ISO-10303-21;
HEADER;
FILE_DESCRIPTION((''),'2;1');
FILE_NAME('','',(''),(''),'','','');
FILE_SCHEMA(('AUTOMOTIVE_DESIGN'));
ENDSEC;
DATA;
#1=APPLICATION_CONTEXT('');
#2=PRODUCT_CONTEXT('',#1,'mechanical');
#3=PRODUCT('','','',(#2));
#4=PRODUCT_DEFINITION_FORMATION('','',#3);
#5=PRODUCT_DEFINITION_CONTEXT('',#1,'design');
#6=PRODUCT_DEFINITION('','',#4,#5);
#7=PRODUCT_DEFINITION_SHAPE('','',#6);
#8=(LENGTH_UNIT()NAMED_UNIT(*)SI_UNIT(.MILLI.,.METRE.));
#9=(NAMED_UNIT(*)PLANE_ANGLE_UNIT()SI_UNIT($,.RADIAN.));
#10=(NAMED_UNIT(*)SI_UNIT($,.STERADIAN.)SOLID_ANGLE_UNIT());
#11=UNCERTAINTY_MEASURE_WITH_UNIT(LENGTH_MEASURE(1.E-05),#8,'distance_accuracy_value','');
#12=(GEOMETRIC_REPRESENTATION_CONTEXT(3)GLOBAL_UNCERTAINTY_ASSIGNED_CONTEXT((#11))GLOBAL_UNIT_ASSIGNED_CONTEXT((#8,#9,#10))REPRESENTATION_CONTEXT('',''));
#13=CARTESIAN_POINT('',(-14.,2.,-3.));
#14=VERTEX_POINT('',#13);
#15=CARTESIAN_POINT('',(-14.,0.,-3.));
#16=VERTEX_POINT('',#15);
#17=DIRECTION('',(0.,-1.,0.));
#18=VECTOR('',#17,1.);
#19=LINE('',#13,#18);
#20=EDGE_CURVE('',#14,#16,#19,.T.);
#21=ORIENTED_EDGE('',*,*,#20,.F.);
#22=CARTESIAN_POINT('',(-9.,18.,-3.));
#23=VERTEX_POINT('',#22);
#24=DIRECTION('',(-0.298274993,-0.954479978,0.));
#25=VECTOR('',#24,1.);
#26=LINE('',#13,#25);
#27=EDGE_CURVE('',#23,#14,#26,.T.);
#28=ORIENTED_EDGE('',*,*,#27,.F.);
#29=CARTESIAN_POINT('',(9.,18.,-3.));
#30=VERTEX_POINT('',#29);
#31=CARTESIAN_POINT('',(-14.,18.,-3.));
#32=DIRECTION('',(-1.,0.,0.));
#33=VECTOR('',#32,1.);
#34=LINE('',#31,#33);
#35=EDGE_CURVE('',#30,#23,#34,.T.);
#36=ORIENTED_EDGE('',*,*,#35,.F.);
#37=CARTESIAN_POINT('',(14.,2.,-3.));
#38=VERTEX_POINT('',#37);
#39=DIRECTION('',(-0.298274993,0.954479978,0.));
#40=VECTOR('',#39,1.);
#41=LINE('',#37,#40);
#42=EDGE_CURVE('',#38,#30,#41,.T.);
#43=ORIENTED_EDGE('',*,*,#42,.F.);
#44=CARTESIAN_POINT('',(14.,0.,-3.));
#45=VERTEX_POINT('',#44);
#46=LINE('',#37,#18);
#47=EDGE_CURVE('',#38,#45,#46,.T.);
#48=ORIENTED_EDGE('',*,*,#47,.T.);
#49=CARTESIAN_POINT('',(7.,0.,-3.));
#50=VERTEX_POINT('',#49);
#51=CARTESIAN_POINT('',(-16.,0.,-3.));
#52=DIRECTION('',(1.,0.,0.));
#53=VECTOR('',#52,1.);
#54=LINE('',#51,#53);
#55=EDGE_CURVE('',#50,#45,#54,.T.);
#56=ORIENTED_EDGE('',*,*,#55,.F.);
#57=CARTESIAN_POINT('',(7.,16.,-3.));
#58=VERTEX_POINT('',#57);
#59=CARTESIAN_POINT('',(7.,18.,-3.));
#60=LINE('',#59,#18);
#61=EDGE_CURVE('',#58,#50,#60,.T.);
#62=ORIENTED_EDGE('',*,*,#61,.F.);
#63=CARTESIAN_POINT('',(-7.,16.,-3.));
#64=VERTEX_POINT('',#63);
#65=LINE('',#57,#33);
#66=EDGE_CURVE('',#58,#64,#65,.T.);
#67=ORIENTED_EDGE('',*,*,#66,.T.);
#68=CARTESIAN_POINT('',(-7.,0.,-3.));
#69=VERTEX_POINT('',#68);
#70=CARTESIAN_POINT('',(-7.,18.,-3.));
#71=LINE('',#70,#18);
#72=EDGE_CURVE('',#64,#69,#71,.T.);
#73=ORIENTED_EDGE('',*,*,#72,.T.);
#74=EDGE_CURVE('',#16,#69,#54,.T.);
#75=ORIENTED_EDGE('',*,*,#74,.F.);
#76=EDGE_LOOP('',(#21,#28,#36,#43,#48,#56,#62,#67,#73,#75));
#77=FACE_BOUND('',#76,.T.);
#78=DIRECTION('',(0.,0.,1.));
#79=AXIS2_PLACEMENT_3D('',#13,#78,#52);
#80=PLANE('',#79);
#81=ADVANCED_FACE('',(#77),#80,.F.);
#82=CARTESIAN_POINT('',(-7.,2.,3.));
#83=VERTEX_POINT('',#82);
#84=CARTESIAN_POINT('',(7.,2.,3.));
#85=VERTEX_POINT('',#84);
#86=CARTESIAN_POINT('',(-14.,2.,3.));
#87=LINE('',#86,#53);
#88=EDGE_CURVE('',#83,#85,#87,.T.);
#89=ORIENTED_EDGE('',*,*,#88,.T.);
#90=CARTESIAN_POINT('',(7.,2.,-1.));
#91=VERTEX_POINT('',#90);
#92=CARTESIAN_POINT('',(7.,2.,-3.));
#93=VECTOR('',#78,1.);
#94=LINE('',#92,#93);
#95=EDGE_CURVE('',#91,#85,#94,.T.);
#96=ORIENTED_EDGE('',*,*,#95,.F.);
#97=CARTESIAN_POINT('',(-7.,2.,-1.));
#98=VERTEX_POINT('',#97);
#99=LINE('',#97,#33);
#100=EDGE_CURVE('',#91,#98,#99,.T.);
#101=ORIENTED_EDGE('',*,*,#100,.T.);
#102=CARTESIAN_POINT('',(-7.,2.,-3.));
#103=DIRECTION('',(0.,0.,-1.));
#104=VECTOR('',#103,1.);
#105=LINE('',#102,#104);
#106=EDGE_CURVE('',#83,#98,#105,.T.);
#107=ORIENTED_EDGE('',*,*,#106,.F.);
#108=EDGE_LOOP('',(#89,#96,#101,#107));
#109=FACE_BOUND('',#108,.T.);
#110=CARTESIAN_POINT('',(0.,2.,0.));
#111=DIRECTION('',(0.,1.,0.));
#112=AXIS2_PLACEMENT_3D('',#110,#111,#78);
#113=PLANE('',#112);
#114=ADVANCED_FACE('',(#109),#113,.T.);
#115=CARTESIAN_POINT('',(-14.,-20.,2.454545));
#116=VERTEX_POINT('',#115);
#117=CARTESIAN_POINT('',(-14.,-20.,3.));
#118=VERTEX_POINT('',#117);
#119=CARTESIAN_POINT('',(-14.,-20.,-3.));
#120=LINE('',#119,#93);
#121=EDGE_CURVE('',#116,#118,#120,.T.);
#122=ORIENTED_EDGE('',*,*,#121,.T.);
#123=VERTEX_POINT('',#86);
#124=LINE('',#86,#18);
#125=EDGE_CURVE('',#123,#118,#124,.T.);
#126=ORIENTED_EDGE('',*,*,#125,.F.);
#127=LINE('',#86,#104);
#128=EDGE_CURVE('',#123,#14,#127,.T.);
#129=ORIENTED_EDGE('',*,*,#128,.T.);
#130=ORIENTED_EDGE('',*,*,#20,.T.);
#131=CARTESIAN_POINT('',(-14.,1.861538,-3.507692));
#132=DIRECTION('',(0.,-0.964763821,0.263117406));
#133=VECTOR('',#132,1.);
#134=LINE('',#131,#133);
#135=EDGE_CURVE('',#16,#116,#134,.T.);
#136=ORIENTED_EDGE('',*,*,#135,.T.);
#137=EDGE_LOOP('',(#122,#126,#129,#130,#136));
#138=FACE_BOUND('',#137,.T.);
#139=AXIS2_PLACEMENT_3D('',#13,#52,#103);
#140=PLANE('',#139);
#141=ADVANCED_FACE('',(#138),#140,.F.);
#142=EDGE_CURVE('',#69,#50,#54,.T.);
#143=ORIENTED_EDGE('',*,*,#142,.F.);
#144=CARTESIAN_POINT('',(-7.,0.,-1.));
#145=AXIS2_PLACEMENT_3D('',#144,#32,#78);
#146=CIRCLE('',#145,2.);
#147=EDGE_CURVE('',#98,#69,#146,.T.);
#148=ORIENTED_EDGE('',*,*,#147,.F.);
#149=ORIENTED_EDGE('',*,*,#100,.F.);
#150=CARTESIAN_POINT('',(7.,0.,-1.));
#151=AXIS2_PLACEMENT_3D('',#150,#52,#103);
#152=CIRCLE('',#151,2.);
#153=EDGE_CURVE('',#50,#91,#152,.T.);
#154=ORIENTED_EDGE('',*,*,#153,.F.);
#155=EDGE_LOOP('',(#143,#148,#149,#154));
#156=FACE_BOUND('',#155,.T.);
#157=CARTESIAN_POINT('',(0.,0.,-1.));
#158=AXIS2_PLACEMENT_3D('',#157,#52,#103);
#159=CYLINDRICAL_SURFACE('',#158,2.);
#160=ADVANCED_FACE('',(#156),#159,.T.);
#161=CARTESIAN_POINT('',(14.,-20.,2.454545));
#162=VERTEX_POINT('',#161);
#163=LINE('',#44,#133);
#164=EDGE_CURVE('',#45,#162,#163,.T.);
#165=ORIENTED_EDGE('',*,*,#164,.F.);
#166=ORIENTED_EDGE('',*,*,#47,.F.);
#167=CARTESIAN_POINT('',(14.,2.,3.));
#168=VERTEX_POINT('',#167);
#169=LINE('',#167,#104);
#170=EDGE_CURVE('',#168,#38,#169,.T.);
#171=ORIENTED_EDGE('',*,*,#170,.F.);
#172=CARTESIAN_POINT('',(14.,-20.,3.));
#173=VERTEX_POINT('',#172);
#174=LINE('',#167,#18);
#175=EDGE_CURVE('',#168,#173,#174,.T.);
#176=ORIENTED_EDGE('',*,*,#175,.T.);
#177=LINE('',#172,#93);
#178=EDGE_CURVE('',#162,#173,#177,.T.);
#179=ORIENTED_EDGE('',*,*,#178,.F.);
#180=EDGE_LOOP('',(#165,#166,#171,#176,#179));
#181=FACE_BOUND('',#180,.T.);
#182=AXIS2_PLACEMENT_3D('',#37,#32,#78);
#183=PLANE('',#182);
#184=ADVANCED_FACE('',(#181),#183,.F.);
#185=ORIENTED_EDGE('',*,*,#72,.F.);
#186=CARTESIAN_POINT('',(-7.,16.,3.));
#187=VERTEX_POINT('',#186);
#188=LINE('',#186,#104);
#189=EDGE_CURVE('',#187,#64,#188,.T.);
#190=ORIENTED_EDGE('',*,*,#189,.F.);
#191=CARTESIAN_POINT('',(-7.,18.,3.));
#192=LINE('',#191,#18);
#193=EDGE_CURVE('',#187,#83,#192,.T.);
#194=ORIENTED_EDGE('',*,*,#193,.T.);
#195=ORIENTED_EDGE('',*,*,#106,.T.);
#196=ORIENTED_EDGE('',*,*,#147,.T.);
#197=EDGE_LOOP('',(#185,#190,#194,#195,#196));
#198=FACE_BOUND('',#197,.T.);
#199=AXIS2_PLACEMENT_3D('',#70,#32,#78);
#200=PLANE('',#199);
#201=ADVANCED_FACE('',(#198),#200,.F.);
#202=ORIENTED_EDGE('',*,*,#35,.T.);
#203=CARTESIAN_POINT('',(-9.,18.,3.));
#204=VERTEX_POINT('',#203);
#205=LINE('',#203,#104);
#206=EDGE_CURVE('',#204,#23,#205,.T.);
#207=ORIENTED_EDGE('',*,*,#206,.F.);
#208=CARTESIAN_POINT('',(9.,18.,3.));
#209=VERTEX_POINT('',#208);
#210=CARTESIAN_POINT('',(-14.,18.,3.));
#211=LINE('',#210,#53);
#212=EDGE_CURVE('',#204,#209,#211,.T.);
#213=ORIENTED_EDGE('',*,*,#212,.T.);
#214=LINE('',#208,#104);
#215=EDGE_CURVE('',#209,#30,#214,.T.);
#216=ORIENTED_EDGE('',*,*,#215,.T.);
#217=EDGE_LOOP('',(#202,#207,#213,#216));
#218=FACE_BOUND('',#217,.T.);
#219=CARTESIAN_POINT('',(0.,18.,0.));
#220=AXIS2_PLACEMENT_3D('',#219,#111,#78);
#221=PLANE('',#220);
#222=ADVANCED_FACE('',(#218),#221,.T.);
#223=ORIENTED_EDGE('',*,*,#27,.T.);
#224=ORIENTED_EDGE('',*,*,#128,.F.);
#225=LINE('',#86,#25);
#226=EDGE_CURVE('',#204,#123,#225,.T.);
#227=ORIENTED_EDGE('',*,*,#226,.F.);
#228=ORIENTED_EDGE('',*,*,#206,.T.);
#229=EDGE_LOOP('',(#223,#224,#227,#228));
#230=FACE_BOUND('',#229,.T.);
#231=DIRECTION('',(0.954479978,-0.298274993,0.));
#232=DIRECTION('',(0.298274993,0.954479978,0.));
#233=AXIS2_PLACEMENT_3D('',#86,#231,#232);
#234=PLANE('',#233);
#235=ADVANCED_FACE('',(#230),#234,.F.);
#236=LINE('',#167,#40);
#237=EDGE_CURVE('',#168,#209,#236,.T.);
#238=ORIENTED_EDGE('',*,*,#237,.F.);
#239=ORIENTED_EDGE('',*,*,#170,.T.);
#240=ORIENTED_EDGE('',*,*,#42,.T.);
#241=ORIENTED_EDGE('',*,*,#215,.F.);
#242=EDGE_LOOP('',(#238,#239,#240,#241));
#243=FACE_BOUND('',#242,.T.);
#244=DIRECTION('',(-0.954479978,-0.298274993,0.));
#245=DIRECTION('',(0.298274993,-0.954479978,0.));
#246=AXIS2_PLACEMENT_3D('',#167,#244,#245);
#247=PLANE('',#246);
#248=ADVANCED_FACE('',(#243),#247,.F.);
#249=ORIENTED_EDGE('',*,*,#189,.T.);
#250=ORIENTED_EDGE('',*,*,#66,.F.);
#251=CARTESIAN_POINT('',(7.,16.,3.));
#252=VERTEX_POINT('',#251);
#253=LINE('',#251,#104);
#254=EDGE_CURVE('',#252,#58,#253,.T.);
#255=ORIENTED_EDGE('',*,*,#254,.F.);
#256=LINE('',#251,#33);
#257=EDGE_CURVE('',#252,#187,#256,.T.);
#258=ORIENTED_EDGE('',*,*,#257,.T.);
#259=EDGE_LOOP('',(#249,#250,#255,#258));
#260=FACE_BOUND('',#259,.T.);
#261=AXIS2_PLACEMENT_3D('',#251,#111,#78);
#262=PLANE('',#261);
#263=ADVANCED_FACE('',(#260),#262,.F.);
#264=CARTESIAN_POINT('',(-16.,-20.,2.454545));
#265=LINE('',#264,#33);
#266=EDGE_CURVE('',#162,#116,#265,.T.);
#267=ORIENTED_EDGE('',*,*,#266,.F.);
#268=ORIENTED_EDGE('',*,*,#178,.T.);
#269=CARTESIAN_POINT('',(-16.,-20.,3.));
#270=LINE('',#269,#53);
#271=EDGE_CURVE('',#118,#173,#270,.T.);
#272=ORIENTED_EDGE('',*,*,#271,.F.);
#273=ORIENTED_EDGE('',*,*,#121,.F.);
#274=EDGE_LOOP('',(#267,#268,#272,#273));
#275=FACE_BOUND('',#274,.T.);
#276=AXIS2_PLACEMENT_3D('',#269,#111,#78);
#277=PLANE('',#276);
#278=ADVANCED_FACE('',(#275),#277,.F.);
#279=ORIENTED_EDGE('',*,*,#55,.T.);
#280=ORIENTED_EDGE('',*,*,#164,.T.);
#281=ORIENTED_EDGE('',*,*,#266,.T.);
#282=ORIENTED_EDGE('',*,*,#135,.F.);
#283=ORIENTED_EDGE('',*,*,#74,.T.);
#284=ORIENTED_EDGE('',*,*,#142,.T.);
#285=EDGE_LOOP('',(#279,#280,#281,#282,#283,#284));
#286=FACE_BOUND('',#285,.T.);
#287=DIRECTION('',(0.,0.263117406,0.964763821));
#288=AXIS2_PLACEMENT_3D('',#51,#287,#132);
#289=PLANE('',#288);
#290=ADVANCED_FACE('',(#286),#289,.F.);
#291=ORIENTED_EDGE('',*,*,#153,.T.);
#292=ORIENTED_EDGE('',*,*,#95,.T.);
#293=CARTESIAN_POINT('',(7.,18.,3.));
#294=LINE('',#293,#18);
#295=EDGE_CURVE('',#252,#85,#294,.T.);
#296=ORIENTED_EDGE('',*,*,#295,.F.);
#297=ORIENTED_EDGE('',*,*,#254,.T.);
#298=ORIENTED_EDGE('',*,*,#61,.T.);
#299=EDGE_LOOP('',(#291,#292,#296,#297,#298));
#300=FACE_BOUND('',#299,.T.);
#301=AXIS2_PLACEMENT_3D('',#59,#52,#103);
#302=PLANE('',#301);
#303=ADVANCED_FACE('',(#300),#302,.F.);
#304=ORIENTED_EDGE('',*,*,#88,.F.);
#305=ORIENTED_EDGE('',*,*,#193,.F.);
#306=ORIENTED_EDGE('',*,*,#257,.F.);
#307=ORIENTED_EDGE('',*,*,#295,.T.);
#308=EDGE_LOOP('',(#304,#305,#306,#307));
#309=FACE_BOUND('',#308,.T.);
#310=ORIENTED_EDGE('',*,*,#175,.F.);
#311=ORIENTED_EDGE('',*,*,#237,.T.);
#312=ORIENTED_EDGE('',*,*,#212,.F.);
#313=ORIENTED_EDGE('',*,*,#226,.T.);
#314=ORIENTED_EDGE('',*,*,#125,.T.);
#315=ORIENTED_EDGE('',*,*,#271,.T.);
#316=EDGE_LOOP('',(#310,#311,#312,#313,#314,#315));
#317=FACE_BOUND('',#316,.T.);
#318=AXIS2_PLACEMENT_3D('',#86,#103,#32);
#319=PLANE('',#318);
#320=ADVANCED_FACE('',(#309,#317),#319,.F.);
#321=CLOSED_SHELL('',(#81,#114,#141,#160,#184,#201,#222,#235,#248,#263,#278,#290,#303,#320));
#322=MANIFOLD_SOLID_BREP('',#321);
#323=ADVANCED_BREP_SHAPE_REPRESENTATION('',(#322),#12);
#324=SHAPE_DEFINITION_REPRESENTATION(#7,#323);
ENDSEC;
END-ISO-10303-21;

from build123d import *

# Parameters (mm, degrees)
SKETCH1_W           = 28
SKETCH1_H           = 6
BOSS_EXTRUDE1_DEPTH = 2
SKETCH2_W           = 7
SKETCH2_H           = 6
BOSS_EXTRUDE2_DEPTH = 16
SKETCH3_W           = 6
SKETCH3_H           = 2
BOSS_EXTRUDE3_DEPTH = 14
CUT_EXTRUDE1_DEPTH  = 24.579652245
SKETCH5_W           = 28
SKETCH5_H           = 6
BOSS_EXTRUDE4_DEPTH = 22
CUT_EXTRUDE2_DEPTH  = 30
CUT_EXTRUDE3_DEPTH  = 30
FILLET1_R           = 2


with BuildPart() as part:
    # Sketch1 → Boss-Extrude1 (new body)
    with BuildSketch(Plane(origin=(0, 0, 0), x_dir=(1, 0, 0), z_dir=(0, 1, 0))):
        Rectangle(SKETCH1_W, SKETCH1_H)
    extrude(amount=BOSS_EXTRUDE1_DEPTH)

    # Sketch2 → Boss-Extrude2 (add)
    with BuildSketch(Plane(origin=(0, 2, 0), x_dir=(1, 0, 0), z_dir=(0, 1, 0))):
        with Locations((-10.5, 0)):
            Rectangle(SKETCH2_W, SKETCH2_H)
        with Locations((10.5, 0)):
            Rectangle(SKETCH2_W, SKETCH2_H)
    extrude(amount=BOSS_EXTRUDE2_DEPTH)

    # Sketch3 → Boss-Extrude3 (add)
    with BuildSketch(Plane(origin=(-7, 0, 0), x_dir=(0, 0, -1), z_dir=(1, 0, 0))):
        with Locations((0, 17)):
            Rectangle(SKETCH3_W, SKETCH3_H)
    extrude(amount=BOSS_EXTRUDE3_DEPTH)

    # Sketch4 → Cut-Extrude1 (cut, through all)
    with BuildSketch(Plane(origin=(0, 0, -3), x_dir=(-1, 0, 0), z_dir=(0, 0, -1))):
        Polygon((-9, 18), (-14, 18), (-14, 2), align=None)
        Polygon((9, 18), (14, 18), (14, 2), align=None)
    extrude(amount=-CUT_EXTRUDE1_DEPTH, mode=Mode.SUBTRACT)

    # Sketch5 → Boss-Extrude4 (add)
    with BuildSketch(Plane.XZ):
        Rectangle(SKETCH5_W, SKETCH5_H)
    extrude(amount=BOSS_EXTRUDE4_DEPTH)

    # Sketch6 → Cut-Extrude2 (cut)
    with BuildSketch(Plane(origin=(14, 0, 0), x_dir=(0, 0, -1), z_dir=(1, 0, 0))):
        Polygon((3, 0), (-3, -22), (3, -22), align=None)
    extrude(amount=-CUT_EXTRUDE2_DEPTH, mode=Mode.SUBTRACT)

    # Sketch7 → Cut-Extrude3 (cut)
    with BuildSketch(Plane(origin=(14, 0, 0), x_dir=(0, 0, -1), z_dir=(1, 0, 0))):
        Polygon((-3, -22), (-3, -20), (-2.454545455, -20), align=None)
    extrude(amount=-CUT_EXTRUDE3_DEPTH, mode=Mode.SUBTRACT)

    # Fillet1
    fillet1_edges = [part.edges().sort_by_distance(p)[0] for p in [
        (0, 2, -3),
    ]]
    fillet(fillet1_edges, radius=FILLET1_R - 0.0001)  # a hair under: the kernel refuses the full size


solid = part.part
